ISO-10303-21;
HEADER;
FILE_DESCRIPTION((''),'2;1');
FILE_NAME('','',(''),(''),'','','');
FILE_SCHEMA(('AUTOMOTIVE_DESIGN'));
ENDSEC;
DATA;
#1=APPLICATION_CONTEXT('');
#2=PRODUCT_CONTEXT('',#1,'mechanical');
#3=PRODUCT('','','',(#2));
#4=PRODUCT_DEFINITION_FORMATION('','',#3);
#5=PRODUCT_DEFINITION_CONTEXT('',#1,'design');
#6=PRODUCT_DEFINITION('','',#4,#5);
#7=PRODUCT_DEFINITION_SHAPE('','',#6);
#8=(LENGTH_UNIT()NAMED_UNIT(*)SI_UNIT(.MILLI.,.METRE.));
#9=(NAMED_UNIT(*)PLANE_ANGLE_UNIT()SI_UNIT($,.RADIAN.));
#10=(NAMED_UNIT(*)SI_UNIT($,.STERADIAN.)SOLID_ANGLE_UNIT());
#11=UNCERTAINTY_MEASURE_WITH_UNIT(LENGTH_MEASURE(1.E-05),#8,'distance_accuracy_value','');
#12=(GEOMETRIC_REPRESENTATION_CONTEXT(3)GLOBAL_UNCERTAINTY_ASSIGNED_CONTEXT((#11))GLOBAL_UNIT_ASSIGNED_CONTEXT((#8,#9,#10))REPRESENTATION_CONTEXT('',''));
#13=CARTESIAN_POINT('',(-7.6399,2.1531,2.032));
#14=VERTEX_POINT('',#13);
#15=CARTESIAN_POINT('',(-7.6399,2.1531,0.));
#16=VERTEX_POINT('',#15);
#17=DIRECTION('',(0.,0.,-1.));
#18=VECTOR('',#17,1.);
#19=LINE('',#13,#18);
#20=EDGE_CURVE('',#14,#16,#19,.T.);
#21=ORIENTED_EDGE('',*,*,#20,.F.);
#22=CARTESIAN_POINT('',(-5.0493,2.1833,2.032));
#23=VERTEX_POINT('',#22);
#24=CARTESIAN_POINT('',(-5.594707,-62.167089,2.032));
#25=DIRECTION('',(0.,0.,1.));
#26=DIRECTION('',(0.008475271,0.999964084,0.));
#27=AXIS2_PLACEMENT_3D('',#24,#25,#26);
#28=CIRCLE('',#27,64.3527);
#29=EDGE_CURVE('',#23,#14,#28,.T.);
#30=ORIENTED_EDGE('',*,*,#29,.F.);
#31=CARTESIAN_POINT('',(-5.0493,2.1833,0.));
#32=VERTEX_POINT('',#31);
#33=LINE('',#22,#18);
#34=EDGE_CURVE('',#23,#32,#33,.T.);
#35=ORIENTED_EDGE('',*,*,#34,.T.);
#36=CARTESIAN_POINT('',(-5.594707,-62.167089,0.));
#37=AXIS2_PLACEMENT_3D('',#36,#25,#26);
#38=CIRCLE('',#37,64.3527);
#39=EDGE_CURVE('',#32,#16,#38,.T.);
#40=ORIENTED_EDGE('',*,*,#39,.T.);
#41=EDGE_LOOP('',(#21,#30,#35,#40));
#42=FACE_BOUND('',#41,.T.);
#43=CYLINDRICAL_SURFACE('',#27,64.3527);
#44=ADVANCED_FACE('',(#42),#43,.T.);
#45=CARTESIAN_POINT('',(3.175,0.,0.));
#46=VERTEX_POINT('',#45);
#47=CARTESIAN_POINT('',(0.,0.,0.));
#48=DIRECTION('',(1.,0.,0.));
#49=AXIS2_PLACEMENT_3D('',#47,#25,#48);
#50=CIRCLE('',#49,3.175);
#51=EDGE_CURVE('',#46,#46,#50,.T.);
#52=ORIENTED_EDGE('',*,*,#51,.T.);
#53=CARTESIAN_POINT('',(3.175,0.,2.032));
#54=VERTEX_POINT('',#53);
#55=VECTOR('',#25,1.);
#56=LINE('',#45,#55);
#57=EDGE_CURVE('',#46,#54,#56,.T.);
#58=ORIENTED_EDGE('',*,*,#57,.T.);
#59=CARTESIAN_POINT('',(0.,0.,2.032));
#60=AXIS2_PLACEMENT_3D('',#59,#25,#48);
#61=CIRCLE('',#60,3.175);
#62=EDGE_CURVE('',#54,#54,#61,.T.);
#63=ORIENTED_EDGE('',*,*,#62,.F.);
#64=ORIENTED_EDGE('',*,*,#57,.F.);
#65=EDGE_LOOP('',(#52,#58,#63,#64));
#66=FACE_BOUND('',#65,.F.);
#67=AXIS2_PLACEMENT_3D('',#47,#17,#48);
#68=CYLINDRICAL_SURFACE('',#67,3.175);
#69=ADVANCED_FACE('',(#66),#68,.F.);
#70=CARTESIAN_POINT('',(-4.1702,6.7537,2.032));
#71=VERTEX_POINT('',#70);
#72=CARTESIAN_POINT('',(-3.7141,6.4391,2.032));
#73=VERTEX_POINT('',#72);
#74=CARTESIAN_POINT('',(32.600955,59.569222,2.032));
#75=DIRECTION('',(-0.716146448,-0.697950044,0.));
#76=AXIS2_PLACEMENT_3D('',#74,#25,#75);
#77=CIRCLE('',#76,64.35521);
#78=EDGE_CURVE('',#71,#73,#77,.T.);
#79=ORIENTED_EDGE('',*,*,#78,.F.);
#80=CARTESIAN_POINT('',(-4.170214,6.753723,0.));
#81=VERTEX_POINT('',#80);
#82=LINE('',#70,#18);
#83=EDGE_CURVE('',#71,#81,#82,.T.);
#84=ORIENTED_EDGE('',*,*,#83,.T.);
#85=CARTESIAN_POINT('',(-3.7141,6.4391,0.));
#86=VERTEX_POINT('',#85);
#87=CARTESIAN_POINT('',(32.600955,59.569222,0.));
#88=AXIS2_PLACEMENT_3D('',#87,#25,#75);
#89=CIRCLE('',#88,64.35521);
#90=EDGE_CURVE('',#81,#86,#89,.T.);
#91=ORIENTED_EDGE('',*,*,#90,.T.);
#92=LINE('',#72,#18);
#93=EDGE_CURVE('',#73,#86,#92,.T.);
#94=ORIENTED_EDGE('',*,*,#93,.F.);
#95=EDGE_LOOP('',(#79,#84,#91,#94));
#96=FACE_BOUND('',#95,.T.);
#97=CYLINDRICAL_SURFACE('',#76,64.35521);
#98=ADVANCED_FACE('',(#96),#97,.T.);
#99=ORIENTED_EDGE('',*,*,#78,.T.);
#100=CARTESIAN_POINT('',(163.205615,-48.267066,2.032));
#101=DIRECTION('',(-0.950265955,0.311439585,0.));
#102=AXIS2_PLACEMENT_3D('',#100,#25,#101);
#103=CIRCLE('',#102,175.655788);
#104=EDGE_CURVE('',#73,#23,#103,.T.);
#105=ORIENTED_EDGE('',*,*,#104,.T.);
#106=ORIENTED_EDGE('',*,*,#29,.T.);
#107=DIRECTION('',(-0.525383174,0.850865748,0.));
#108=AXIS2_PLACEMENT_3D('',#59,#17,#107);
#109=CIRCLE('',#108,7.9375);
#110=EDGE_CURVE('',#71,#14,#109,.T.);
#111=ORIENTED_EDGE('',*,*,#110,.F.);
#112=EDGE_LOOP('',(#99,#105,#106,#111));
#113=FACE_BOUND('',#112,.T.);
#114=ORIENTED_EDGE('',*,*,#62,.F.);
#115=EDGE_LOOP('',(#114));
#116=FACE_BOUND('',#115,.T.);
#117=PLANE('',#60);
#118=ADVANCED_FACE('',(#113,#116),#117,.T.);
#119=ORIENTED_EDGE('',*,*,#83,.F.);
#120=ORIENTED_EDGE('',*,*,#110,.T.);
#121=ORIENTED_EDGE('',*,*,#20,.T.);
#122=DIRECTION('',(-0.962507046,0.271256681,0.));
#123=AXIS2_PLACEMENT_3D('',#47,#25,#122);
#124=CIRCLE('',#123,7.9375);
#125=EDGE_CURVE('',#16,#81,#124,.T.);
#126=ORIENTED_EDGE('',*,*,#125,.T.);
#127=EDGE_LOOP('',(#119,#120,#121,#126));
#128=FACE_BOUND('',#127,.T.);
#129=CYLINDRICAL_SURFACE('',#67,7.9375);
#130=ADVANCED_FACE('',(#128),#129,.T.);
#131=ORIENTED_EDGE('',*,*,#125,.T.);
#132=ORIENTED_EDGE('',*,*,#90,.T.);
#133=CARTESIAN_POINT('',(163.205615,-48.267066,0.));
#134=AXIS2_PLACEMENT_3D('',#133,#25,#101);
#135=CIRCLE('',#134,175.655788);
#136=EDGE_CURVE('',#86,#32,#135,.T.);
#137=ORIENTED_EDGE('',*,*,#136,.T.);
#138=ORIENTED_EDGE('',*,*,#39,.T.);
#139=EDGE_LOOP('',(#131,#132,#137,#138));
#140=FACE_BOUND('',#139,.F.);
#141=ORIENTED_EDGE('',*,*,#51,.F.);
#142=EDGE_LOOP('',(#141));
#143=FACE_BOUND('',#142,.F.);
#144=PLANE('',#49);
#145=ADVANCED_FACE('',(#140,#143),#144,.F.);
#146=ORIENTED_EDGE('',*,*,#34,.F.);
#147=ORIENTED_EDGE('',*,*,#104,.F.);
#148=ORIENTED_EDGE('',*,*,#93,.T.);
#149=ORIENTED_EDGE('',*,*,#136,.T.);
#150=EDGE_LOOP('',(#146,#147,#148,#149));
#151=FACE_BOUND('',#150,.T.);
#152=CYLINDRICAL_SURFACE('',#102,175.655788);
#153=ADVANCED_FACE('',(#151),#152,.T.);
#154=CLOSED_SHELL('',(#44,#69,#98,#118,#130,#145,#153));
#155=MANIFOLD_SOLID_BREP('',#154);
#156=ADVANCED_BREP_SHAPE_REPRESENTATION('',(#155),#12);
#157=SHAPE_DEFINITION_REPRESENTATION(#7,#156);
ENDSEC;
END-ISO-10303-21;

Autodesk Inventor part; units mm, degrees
ref_plane "YZ Plane" through (0, 0, 0) normal (1, 0, 0) x (0, 1, 0)
ref_plane "XZ Plane" through (0, 0, 0) normal (0, 1, 0) x (-1, 0, 0)
ref_plane "XY Plane" through (0, 0, 0) normal (0, 0, 1) x (1, 0, 0)
sketch "Sketch1" plane through (0, 0, 0) normal (0, 0, 1) x (1, 0, 0)
  circle A0 centre (0, 0) radius 7.9375
  circle A1 centre (0, 0) radius 3.175
  dimension "d0" = 15.875
  dimension "d1" = 6.35
extrude "Extrusion1" add sketch "Sketch1" along normal blind 2.032
sketch "Sketch2" plane through (0, 0, 2.032) normal (0, 0, 1) x (1, 0, 0)
  circle A0 centre (0, 0) radius 7.9375 construction
  arc A1 (-5.0493, 2.1833) -> (-17.7625, 1.0248) centre (-5.5945, -62.1721) ccw projected
  arc A2 (-3.7141, 6.4391) -> (-5.0493, 2.1833) centre (163.5858, -48.389) ccw projected
  arc A3 (-13.4868, 14.6525) -> (-3.7141, 6.4391) centre (32.6027, 59.5711) ccw projected
  arc A4 (-4.1702, 6.7537) -> (-7.6399, 2.1531) centre (0, 0) ccw
extrude "Extrusion2" cut sketch "Sketch2" against normal blind 25.4
properties part number "Gear Washer Spacer 4" material "Steel"
